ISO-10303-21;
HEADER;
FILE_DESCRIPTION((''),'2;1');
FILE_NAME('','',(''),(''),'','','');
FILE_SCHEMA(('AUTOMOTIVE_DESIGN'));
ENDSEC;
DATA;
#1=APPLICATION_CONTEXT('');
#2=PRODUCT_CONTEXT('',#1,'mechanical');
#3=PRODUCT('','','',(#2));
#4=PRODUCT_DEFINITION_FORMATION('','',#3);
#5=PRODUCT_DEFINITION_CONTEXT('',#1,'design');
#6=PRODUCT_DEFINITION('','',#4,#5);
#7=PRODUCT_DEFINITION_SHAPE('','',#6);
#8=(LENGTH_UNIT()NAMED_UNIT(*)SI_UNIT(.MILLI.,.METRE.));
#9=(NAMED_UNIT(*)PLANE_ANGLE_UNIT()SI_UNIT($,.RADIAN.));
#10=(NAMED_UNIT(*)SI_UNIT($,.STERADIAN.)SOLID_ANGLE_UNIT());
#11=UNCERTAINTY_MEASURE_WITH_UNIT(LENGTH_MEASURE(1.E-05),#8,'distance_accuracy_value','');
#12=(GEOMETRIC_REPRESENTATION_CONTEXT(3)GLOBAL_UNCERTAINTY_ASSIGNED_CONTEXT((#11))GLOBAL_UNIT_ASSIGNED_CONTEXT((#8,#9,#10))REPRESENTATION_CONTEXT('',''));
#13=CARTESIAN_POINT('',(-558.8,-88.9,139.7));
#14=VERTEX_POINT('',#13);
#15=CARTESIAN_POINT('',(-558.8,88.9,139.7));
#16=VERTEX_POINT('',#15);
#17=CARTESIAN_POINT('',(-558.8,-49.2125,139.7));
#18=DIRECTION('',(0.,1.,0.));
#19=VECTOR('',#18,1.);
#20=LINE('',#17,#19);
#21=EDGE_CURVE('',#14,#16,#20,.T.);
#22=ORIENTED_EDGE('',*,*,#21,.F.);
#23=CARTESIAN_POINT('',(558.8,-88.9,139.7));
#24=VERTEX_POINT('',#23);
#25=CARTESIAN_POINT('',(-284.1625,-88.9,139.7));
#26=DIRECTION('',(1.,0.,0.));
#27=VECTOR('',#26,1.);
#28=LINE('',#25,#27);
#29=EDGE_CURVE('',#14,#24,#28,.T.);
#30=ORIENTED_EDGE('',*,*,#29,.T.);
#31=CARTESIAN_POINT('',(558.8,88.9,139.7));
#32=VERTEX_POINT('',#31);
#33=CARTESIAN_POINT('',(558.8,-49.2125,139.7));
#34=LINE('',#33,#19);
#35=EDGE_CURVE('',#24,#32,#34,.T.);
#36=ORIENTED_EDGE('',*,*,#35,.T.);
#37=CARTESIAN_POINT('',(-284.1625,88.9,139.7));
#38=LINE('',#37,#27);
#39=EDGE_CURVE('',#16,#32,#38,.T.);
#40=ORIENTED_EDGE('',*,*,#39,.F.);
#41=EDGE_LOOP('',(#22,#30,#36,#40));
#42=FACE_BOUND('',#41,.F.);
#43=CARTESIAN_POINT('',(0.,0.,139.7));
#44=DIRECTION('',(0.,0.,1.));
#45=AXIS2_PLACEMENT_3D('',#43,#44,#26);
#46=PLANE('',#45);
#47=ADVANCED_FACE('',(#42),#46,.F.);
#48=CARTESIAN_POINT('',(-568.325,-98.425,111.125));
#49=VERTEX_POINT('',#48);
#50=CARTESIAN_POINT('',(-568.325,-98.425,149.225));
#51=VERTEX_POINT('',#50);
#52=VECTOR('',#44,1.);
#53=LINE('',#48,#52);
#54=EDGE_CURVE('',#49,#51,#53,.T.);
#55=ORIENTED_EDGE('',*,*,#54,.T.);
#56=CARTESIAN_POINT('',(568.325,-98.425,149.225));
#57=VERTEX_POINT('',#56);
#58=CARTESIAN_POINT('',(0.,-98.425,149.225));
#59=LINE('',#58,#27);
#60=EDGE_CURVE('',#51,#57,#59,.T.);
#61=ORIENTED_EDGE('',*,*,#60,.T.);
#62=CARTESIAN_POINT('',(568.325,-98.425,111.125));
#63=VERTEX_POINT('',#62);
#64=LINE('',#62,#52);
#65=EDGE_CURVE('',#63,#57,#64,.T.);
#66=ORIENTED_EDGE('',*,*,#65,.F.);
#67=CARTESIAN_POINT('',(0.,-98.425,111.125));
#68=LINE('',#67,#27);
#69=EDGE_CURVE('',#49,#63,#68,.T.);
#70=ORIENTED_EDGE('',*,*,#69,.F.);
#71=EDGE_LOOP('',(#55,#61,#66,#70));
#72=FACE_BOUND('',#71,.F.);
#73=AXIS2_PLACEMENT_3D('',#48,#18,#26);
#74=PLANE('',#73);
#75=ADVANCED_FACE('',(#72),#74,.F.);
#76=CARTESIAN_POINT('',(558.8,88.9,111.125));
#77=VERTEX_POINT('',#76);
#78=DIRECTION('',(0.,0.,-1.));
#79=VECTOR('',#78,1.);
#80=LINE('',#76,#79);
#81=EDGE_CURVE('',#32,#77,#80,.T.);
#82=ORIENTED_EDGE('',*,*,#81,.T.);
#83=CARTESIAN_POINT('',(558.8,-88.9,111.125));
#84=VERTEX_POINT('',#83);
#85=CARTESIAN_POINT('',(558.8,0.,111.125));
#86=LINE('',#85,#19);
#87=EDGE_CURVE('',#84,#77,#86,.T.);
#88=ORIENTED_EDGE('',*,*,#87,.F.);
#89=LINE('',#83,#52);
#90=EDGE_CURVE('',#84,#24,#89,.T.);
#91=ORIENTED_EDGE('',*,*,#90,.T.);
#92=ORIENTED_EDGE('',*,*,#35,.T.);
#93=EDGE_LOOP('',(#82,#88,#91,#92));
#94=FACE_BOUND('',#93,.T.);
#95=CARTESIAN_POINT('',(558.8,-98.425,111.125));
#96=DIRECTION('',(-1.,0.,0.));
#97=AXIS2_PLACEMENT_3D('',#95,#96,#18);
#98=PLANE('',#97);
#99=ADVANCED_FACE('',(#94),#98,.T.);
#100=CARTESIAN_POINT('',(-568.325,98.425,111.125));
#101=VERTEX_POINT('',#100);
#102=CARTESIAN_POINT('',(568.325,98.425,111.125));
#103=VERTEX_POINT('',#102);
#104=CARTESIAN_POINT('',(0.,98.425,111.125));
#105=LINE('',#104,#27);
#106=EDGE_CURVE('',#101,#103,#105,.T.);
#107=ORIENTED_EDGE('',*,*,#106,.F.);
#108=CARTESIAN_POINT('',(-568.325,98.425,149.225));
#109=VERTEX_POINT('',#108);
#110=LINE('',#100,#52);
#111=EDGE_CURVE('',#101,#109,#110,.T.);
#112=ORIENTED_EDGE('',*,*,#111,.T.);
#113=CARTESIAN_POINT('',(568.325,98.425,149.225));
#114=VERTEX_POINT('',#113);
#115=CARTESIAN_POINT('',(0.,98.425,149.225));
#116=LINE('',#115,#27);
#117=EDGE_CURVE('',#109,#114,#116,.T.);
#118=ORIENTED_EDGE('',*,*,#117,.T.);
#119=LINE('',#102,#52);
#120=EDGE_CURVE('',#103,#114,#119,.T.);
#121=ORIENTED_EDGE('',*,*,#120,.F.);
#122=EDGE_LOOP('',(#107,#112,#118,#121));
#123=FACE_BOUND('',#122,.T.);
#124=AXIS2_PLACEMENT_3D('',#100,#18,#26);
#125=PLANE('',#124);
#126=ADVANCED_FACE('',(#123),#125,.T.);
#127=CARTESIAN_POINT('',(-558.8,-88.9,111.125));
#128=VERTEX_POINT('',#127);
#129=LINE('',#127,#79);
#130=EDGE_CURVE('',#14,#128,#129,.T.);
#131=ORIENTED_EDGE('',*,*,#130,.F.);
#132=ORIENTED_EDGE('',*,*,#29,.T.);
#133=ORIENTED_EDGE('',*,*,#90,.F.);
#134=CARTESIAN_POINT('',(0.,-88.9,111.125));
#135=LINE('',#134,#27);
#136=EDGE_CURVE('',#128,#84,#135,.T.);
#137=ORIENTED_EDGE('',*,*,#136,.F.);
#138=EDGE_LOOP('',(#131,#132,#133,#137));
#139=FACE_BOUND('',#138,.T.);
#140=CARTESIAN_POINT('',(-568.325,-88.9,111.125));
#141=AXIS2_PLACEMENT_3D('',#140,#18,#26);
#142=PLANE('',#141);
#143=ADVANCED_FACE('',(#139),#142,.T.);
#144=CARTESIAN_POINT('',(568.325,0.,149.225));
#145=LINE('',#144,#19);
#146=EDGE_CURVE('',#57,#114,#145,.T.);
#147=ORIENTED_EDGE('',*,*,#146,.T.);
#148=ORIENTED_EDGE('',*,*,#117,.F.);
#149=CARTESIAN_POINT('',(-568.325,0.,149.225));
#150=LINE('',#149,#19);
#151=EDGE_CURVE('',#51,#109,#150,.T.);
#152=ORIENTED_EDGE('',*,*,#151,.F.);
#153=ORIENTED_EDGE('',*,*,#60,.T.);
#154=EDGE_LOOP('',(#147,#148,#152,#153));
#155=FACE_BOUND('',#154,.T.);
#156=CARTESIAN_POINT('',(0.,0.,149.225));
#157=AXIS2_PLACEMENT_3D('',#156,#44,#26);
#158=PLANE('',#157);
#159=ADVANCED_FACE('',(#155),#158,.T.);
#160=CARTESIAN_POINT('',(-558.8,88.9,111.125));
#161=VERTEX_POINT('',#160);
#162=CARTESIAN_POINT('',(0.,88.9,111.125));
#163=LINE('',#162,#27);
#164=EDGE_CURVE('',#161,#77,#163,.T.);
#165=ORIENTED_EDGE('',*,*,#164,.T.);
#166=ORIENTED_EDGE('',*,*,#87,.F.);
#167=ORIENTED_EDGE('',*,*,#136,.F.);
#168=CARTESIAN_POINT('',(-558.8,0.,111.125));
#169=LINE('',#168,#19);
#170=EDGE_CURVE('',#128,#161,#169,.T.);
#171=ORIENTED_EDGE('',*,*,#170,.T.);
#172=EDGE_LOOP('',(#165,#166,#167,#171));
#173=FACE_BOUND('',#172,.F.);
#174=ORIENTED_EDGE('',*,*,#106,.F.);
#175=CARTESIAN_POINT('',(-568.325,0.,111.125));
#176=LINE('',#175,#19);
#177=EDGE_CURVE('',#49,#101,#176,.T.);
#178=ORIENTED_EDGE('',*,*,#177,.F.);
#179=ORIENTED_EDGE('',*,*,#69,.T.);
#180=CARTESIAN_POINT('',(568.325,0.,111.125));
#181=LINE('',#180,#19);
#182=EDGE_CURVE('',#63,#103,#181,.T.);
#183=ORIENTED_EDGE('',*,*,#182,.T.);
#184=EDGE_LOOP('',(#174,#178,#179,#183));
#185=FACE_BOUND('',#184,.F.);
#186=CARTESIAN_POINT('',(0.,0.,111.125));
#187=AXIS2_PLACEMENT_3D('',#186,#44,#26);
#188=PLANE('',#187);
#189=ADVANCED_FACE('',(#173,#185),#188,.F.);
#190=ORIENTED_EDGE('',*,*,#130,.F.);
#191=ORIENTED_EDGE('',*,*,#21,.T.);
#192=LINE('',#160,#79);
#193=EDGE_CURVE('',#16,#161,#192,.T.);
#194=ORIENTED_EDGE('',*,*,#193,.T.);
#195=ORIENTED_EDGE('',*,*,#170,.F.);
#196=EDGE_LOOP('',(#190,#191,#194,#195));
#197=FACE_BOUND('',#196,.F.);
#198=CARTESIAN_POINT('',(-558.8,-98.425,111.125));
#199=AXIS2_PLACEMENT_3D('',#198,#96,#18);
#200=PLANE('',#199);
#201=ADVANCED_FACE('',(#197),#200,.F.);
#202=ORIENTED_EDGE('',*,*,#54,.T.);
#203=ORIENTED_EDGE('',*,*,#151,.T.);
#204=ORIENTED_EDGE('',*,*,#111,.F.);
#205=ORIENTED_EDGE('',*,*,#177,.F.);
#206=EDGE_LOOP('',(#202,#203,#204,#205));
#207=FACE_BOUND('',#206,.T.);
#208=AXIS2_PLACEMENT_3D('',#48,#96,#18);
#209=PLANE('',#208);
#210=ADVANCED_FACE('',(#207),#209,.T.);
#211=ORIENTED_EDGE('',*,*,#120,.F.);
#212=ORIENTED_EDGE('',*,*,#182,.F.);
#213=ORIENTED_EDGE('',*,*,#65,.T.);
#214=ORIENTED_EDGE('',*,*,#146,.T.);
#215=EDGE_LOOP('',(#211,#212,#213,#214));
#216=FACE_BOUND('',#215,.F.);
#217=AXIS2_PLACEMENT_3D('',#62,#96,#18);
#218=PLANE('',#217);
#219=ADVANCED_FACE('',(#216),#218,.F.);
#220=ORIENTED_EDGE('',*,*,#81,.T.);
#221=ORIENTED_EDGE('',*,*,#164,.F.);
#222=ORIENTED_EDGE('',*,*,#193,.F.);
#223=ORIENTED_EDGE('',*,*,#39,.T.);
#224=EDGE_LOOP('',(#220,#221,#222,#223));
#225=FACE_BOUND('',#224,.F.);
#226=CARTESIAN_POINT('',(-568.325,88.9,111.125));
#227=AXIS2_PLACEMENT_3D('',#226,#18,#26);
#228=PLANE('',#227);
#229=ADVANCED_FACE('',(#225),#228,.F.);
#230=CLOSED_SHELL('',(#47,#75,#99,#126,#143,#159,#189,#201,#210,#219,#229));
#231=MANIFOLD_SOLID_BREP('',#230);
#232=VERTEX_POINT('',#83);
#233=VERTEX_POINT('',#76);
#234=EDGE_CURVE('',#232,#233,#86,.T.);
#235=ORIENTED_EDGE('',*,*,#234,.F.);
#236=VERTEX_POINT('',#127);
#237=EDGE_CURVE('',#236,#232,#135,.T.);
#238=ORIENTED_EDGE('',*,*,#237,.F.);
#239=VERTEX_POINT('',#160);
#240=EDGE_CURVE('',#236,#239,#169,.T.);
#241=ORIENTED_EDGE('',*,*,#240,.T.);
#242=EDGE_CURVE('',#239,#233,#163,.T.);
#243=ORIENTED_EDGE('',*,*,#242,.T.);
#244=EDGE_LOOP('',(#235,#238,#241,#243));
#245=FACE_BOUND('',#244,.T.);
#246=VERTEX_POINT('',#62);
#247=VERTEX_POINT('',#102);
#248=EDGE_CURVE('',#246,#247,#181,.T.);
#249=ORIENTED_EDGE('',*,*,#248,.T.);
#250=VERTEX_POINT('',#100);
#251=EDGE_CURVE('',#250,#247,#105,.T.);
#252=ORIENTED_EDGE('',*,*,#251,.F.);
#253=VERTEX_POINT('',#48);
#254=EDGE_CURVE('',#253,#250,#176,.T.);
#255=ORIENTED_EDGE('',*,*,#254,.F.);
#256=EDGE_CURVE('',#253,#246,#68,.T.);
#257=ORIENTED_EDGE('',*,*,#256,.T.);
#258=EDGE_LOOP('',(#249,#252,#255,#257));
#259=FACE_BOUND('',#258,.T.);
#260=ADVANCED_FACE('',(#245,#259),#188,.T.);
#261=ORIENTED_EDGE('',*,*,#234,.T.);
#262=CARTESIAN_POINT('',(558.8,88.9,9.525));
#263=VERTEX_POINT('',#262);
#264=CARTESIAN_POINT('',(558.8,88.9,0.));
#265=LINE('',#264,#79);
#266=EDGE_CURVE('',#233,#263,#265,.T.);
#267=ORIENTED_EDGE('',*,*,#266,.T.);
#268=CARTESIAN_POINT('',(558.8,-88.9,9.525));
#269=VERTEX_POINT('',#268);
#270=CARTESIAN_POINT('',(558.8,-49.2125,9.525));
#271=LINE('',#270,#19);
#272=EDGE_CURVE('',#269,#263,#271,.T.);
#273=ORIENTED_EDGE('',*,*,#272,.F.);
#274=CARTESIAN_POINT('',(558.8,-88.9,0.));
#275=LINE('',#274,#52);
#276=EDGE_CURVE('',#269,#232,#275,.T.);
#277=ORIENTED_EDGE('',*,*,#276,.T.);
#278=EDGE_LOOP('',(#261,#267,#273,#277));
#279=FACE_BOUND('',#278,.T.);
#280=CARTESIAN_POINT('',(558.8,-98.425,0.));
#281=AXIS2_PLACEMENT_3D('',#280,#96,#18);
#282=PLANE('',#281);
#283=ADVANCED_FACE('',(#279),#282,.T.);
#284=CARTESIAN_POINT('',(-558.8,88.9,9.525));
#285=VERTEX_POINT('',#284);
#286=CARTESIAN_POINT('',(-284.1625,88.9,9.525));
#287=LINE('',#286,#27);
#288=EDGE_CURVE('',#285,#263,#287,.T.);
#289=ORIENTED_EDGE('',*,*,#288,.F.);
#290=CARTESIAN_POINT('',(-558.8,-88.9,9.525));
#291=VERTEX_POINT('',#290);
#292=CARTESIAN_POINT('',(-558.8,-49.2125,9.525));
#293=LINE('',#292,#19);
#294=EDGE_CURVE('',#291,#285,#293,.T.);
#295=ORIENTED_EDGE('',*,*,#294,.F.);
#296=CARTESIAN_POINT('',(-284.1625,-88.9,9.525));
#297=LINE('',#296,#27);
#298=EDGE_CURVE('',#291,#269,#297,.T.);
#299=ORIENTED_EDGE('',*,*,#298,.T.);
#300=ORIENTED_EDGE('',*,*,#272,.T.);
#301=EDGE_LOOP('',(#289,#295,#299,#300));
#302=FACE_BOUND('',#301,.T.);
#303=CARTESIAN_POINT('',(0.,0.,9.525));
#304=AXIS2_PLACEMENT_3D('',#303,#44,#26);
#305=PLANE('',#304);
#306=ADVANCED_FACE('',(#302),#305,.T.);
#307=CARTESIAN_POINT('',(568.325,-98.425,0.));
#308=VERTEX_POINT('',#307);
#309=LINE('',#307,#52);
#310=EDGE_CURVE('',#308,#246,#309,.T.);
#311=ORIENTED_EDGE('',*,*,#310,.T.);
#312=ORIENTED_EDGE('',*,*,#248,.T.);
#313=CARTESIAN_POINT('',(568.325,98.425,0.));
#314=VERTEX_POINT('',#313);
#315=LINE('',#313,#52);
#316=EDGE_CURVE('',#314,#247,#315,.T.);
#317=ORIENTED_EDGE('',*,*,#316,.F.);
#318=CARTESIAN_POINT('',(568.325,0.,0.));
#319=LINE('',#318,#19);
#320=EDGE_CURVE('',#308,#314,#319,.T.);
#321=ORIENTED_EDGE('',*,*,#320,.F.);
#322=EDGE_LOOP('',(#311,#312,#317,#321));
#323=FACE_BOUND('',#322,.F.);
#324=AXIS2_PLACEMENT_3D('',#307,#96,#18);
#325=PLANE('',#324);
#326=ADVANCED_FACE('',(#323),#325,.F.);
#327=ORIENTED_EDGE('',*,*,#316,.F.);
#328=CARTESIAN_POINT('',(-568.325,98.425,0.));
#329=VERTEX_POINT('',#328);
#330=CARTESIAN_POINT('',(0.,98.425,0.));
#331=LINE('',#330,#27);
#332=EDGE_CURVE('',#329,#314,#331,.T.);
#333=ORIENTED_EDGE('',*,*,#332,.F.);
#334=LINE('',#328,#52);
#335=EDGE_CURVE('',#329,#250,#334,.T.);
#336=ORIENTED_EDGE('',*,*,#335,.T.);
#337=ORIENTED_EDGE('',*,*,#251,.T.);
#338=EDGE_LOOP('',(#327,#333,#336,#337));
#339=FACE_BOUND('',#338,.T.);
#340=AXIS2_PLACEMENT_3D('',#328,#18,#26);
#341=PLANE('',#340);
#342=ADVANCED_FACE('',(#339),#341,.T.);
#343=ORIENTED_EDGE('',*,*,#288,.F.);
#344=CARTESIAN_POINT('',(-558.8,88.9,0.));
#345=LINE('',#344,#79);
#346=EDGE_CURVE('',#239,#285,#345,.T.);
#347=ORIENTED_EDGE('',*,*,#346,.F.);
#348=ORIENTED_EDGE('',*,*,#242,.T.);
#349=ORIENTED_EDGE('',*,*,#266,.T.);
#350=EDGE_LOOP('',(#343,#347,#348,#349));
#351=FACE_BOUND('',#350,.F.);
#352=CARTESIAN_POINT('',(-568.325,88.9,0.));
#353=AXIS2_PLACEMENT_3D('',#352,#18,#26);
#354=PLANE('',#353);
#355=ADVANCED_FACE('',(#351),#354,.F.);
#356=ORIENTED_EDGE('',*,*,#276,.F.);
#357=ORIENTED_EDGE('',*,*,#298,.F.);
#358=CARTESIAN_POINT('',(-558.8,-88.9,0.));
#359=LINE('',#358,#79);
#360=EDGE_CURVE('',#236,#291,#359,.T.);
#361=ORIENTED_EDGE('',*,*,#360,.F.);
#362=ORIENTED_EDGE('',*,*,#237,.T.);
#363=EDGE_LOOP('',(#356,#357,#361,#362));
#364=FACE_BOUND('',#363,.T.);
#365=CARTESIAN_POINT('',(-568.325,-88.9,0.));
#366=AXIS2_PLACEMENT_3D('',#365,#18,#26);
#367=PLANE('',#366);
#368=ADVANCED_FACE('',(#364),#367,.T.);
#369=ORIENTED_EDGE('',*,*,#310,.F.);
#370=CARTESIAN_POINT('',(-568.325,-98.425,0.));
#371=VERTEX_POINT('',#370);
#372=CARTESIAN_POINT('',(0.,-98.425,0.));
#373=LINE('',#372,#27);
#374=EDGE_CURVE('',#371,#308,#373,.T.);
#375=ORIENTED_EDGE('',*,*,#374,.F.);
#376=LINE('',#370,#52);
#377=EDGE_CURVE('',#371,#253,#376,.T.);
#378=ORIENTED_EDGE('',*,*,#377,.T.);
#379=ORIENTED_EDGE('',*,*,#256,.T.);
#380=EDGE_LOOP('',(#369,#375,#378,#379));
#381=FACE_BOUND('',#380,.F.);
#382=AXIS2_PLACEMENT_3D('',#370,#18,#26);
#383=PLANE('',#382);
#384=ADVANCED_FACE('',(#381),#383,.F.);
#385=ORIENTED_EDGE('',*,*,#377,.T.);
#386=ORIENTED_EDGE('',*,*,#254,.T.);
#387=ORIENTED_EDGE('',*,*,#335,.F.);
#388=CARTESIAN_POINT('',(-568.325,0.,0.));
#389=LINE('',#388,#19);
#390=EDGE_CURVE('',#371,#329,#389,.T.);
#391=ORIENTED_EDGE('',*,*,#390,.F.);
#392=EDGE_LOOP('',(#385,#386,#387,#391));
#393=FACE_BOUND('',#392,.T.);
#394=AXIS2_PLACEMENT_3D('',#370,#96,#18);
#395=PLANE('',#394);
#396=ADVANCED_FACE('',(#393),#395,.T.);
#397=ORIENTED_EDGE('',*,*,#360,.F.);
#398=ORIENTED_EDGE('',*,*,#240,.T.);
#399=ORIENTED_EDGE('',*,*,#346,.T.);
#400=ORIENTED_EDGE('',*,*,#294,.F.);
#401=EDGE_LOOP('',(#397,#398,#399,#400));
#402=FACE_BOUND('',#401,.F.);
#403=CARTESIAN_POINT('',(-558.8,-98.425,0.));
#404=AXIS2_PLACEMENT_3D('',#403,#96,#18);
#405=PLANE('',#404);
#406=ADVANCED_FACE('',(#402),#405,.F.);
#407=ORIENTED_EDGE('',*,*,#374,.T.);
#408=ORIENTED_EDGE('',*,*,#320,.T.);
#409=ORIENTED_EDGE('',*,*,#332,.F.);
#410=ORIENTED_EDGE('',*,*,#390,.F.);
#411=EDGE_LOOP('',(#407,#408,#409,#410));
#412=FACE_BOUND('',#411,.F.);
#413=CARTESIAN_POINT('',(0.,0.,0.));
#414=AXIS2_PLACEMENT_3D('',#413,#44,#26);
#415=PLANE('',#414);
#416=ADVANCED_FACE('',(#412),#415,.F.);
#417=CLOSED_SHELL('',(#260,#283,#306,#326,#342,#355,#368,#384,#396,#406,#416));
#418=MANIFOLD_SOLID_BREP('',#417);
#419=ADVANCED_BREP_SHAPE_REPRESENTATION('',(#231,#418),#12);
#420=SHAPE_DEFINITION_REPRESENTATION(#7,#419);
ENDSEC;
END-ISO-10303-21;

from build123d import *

# Parameters (mm, degrees)
F0_W     = 1136.65
F0_H     = 196.85
F0_W_2   = 1117.6
F0_H_2   = 177.8
F1_DEPTH = 111.125
F2_DEPTH = 38.1
F3_T     = -9.525
F3_2_T   = -9.525


# Not quite as in the source:
# - a feature of the source that left no trace in its solid (it failed there, or was rolled back) is left out


with BuildPart() as f1:
    # F0 (on Top) → F1 (new body)
    with BuildSketch(Plane.XY):
        Rectangle(F0_W, F0_H)
        Rectangle(F0_W_2, F0_H_2, mode=Mode.SUBTRACT)
        Rectangle(F0_W_2, F0_H_2)
    extrude(amount=F1_DEPTH)


with BuildPart() as f2:
    # F2 (new): a face of the model
    f2_faces = [f1.part.faces().sort_by_distance(p)[0] for p in [
        (0, 0, 111.125),
    ]]
    extrude(f2_faces, amount=F2_DEPTH)

    # F3#2
    f3_2_openings = [f2.faces().sort_by_distance(p)[0] for p in [
        (0, 0, 111.125),
    ]]
    offset(amount=F3_2_T, openings=f3_2_openings)


with BuildPart() as f1_1:
    add(f1.part)

    # F3
    f3_openings = [f1_1.faces().sort_by_distance(p)[0] for p in [
        (0, 0, 111.125),
    ]]
    offset(amount=F3_T, openings=f3_openings)


solid = Compound([f2.part, f1_1.part])
